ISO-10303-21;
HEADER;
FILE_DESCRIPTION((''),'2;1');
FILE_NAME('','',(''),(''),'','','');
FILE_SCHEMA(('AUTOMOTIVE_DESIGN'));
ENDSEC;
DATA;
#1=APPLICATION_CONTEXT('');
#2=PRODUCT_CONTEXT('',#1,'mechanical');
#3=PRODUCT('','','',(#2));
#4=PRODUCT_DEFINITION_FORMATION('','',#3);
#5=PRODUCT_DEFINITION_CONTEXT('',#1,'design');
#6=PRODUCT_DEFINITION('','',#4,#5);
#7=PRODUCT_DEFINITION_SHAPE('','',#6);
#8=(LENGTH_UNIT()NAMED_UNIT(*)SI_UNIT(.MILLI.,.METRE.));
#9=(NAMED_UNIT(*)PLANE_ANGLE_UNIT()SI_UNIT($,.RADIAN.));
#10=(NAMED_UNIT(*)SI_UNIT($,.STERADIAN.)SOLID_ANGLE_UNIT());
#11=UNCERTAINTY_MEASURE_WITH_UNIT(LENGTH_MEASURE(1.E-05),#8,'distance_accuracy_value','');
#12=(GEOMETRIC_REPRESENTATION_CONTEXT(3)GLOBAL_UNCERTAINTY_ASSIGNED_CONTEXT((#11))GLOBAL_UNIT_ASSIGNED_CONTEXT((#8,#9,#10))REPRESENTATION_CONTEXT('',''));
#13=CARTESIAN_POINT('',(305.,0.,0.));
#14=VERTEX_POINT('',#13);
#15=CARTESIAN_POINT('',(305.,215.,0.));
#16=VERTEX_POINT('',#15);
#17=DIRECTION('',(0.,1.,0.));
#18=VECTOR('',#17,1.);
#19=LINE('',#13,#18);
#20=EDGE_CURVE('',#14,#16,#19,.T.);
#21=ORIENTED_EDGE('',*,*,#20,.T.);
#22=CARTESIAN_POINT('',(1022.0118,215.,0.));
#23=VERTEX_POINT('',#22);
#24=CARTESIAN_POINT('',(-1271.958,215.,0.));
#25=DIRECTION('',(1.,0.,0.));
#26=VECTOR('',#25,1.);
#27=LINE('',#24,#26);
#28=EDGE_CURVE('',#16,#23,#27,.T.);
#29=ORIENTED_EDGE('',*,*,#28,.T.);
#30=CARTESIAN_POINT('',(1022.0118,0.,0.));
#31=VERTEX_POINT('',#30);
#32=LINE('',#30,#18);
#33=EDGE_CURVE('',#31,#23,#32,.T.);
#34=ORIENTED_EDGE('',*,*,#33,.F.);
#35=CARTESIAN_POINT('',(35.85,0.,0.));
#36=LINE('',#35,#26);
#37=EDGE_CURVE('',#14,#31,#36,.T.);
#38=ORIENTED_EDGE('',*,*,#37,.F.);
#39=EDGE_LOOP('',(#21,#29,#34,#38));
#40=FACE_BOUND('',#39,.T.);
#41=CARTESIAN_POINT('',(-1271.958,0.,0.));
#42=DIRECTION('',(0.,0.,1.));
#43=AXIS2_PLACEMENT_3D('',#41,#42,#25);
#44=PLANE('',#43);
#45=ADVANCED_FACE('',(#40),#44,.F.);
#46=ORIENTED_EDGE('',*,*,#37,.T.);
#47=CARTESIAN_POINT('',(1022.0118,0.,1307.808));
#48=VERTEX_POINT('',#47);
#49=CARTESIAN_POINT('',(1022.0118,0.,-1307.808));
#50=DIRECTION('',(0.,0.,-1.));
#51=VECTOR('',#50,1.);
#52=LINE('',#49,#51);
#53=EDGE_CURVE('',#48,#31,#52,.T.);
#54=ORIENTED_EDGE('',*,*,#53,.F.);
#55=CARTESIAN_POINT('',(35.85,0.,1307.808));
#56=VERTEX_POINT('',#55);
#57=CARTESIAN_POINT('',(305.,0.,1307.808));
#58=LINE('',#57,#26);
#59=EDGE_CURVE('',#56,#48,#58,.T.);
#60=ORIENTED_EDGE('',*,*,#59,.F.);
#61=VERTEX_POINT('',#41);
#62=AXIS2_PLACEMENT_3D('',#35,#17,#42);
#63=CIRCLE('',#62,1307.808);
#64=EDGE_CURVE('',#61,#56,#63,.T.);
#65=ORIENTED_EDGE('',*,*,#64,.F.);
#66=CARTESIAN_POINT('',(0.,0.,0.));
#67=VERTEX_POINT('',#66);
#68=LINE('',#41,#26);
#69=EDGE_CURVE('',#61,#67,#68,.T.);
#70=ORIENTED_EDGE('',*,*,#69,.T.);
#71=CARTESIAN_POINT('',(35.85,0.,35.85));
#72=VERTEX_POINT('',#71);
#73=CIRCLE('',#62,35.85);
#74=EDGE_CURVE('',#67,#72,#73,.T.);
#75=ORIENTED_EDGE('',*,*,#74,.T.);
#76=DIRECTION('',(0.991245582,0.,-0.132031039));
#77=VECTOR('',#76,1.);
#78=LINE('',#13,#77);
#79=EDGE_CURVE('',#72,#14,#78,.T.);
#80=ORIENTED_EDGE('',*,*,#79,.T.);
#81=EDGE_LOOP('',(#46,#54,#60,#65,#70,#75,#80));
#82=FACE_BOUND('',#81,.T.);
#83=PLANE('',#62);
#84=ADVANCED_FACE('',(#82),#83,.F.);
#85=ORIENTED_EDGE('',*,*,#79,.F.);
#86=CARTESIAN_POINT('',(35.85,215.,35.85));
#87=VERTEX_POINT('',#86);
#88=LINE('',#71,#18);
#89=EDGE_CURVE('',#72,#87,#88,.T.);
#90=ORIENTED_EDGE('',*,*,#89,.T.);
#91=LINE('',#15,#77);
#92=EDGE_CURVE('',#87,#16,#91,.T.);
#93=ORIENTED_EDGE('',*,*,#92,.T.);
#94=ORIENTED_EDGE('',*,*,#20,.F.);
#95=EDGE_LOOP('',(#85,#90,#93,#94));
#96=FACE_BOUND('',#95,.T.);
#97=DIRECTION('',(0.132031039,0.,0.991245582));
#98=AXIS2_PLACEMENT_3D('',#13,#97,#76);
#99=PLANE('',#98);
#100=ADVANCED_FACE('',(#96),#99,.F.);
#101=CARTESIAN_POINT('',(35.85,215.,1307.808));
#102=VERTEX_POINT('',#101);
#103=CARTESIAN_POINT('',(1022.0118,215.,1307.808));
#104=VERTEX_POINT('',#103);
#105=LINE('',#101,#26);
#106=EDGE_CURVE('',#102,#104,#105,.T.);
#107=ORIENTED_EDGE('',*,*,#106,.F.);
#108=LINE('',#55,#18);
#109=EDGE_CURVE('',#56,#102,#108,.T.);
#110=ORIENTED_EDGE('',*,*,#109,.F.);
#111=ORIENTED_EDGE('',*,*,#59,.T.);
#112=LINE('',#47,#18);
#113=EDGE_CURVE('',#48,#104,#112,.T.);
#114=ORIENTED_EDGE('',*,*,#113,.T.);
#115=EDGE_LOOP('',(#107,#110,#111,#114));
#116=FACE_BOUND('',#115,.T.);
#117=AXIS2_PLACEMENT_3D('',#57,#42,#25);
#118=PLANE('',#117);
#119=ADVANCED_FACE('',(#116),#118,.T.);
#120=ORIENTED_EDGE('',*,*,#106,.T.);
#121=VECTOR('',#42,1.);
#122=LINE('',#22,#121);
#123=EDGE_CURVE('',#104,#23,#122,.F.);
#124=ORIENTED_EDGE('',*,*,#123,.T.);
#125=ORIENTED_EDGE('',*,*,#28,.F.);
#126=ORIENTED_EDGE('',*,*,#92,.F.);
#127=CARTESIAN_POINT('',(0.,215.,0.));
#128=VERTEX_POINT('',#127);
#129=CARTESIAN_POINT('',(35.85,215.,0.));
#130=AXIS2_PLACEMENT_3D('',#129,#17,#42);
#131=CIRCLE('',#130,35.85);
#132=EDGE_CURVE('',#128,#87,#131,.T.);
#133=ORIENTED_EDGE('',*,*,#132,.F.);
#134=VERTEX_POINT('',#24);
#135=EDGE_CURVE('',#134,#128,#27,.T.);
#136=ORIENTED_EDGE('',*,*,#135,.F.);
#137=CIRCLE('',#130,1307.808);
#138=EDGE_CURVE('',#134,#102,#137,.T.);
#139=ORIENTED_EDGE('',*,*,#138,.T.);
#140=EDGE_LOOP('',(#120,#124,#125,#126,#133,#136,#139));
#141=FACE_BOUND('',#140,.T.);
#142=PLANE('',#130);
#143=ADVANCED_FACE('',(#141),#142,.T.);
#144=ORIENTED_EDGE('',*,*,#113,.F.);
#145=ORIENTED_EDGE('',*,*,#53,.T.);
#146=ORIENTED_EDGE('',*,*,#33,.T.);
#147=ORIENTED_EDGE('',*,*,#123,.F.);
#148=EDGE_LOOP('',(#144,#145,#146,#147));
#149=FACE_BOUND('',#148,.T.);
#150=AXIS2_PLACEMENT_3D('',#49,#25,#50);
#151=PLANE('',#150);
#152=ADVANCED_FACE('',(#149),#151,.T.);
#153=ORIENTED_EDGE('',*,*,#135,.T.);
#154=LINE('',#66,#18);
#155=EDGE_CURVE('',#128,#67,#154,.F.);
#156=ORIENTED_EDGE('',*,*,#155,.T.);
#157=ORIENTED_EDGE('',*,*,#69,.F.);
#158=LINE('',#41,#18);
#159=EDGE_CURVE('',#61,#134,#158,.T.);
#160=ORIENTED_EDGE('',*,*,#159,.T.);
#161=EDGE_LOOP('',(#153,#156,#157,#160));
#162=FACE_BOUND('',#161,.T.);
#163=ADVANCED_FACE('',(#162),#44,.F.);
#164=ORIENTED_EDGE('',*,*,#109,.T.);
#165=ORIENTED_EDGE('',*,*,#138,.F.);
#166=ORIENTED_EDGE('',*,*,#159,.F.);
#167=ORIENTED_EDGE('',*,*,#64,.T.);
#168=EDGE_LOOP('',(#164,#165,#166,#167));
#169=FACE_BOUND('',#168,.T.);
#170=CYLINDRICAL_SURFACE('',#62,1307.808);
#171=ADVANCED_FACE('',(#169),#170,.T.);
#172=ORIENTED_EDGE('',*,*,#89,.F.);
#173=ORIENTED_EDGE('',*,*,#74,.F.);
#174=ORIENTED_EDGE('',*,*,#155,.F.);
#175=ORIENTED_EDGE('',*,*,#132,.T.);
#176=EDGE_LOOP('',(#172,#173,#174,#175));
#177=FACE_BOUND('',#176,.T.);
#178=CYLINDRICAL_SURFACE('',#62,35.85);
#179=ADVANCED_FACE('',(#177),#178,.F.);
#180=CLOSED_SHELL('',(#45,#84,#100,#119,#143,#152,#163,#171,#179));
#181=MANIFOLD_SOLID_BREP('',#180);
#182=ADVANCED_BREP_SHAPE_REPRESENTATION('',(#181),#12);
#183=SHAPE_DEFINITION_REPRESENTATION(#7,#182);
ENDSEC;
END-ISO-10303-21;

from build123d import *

# Parameters (mm, degrees)
THICKEN1_DEPTH     = 215
SKETCH5_W          = 2293.9698
SKETCH5_H          = 1307.808
CUT_EXTRUDE1_DEPTH = 1837.971398424


# Read off the part's stored shape, not the designer's step: Thicken1
with BuildPart() as part:
    # Thicken1 outline → Thicken1 (new body)
    with BuildSketch(Plane(origin=(0, 0, 0), x_dir=(1, 0, 0), z_dir=(0, 1, 0))):
        with BuildLine():
            Line((35.85, -1307.808), (1022.0118, -1307.808))
            Line((1022.0118, -1307.808), (1022.0118, 1307.808))
            Line((1022.0118, 1307.808), (35.85, 1307.808))
            ThreePointArc((35.85, 1307.808), (-1271.958, 0), (35.85, -1307.808))
        make_face()
        with BuildLine():
            Line((305, 0), (35.85, -35.85))
            ThreePointArc((35.85, -35.85), (0, 0), (35.85, 35.85))
            Line((35.85, 35.85), (305, 0))
        make_face(mode=Mode.SUBTRACT)
    extrude(amount=THICKEN1_DEPTH)

    # Sketch5 → Cut-Extrude1 (cut, through all)
    with BuildSketch(Plane(origin=(0, 215, 0), x_dir=(1, 0, 0), z_dir=(0, 1, 0))):
        with Locations((-124.9731, 653.904)):
            Rectangle(SKETCH5_W, SKETCH5_H)
    extrude(amount=-CUT_EXTRUDE1_DEPTH, mode=Mode.SUBTRACT)


solid = part.part
